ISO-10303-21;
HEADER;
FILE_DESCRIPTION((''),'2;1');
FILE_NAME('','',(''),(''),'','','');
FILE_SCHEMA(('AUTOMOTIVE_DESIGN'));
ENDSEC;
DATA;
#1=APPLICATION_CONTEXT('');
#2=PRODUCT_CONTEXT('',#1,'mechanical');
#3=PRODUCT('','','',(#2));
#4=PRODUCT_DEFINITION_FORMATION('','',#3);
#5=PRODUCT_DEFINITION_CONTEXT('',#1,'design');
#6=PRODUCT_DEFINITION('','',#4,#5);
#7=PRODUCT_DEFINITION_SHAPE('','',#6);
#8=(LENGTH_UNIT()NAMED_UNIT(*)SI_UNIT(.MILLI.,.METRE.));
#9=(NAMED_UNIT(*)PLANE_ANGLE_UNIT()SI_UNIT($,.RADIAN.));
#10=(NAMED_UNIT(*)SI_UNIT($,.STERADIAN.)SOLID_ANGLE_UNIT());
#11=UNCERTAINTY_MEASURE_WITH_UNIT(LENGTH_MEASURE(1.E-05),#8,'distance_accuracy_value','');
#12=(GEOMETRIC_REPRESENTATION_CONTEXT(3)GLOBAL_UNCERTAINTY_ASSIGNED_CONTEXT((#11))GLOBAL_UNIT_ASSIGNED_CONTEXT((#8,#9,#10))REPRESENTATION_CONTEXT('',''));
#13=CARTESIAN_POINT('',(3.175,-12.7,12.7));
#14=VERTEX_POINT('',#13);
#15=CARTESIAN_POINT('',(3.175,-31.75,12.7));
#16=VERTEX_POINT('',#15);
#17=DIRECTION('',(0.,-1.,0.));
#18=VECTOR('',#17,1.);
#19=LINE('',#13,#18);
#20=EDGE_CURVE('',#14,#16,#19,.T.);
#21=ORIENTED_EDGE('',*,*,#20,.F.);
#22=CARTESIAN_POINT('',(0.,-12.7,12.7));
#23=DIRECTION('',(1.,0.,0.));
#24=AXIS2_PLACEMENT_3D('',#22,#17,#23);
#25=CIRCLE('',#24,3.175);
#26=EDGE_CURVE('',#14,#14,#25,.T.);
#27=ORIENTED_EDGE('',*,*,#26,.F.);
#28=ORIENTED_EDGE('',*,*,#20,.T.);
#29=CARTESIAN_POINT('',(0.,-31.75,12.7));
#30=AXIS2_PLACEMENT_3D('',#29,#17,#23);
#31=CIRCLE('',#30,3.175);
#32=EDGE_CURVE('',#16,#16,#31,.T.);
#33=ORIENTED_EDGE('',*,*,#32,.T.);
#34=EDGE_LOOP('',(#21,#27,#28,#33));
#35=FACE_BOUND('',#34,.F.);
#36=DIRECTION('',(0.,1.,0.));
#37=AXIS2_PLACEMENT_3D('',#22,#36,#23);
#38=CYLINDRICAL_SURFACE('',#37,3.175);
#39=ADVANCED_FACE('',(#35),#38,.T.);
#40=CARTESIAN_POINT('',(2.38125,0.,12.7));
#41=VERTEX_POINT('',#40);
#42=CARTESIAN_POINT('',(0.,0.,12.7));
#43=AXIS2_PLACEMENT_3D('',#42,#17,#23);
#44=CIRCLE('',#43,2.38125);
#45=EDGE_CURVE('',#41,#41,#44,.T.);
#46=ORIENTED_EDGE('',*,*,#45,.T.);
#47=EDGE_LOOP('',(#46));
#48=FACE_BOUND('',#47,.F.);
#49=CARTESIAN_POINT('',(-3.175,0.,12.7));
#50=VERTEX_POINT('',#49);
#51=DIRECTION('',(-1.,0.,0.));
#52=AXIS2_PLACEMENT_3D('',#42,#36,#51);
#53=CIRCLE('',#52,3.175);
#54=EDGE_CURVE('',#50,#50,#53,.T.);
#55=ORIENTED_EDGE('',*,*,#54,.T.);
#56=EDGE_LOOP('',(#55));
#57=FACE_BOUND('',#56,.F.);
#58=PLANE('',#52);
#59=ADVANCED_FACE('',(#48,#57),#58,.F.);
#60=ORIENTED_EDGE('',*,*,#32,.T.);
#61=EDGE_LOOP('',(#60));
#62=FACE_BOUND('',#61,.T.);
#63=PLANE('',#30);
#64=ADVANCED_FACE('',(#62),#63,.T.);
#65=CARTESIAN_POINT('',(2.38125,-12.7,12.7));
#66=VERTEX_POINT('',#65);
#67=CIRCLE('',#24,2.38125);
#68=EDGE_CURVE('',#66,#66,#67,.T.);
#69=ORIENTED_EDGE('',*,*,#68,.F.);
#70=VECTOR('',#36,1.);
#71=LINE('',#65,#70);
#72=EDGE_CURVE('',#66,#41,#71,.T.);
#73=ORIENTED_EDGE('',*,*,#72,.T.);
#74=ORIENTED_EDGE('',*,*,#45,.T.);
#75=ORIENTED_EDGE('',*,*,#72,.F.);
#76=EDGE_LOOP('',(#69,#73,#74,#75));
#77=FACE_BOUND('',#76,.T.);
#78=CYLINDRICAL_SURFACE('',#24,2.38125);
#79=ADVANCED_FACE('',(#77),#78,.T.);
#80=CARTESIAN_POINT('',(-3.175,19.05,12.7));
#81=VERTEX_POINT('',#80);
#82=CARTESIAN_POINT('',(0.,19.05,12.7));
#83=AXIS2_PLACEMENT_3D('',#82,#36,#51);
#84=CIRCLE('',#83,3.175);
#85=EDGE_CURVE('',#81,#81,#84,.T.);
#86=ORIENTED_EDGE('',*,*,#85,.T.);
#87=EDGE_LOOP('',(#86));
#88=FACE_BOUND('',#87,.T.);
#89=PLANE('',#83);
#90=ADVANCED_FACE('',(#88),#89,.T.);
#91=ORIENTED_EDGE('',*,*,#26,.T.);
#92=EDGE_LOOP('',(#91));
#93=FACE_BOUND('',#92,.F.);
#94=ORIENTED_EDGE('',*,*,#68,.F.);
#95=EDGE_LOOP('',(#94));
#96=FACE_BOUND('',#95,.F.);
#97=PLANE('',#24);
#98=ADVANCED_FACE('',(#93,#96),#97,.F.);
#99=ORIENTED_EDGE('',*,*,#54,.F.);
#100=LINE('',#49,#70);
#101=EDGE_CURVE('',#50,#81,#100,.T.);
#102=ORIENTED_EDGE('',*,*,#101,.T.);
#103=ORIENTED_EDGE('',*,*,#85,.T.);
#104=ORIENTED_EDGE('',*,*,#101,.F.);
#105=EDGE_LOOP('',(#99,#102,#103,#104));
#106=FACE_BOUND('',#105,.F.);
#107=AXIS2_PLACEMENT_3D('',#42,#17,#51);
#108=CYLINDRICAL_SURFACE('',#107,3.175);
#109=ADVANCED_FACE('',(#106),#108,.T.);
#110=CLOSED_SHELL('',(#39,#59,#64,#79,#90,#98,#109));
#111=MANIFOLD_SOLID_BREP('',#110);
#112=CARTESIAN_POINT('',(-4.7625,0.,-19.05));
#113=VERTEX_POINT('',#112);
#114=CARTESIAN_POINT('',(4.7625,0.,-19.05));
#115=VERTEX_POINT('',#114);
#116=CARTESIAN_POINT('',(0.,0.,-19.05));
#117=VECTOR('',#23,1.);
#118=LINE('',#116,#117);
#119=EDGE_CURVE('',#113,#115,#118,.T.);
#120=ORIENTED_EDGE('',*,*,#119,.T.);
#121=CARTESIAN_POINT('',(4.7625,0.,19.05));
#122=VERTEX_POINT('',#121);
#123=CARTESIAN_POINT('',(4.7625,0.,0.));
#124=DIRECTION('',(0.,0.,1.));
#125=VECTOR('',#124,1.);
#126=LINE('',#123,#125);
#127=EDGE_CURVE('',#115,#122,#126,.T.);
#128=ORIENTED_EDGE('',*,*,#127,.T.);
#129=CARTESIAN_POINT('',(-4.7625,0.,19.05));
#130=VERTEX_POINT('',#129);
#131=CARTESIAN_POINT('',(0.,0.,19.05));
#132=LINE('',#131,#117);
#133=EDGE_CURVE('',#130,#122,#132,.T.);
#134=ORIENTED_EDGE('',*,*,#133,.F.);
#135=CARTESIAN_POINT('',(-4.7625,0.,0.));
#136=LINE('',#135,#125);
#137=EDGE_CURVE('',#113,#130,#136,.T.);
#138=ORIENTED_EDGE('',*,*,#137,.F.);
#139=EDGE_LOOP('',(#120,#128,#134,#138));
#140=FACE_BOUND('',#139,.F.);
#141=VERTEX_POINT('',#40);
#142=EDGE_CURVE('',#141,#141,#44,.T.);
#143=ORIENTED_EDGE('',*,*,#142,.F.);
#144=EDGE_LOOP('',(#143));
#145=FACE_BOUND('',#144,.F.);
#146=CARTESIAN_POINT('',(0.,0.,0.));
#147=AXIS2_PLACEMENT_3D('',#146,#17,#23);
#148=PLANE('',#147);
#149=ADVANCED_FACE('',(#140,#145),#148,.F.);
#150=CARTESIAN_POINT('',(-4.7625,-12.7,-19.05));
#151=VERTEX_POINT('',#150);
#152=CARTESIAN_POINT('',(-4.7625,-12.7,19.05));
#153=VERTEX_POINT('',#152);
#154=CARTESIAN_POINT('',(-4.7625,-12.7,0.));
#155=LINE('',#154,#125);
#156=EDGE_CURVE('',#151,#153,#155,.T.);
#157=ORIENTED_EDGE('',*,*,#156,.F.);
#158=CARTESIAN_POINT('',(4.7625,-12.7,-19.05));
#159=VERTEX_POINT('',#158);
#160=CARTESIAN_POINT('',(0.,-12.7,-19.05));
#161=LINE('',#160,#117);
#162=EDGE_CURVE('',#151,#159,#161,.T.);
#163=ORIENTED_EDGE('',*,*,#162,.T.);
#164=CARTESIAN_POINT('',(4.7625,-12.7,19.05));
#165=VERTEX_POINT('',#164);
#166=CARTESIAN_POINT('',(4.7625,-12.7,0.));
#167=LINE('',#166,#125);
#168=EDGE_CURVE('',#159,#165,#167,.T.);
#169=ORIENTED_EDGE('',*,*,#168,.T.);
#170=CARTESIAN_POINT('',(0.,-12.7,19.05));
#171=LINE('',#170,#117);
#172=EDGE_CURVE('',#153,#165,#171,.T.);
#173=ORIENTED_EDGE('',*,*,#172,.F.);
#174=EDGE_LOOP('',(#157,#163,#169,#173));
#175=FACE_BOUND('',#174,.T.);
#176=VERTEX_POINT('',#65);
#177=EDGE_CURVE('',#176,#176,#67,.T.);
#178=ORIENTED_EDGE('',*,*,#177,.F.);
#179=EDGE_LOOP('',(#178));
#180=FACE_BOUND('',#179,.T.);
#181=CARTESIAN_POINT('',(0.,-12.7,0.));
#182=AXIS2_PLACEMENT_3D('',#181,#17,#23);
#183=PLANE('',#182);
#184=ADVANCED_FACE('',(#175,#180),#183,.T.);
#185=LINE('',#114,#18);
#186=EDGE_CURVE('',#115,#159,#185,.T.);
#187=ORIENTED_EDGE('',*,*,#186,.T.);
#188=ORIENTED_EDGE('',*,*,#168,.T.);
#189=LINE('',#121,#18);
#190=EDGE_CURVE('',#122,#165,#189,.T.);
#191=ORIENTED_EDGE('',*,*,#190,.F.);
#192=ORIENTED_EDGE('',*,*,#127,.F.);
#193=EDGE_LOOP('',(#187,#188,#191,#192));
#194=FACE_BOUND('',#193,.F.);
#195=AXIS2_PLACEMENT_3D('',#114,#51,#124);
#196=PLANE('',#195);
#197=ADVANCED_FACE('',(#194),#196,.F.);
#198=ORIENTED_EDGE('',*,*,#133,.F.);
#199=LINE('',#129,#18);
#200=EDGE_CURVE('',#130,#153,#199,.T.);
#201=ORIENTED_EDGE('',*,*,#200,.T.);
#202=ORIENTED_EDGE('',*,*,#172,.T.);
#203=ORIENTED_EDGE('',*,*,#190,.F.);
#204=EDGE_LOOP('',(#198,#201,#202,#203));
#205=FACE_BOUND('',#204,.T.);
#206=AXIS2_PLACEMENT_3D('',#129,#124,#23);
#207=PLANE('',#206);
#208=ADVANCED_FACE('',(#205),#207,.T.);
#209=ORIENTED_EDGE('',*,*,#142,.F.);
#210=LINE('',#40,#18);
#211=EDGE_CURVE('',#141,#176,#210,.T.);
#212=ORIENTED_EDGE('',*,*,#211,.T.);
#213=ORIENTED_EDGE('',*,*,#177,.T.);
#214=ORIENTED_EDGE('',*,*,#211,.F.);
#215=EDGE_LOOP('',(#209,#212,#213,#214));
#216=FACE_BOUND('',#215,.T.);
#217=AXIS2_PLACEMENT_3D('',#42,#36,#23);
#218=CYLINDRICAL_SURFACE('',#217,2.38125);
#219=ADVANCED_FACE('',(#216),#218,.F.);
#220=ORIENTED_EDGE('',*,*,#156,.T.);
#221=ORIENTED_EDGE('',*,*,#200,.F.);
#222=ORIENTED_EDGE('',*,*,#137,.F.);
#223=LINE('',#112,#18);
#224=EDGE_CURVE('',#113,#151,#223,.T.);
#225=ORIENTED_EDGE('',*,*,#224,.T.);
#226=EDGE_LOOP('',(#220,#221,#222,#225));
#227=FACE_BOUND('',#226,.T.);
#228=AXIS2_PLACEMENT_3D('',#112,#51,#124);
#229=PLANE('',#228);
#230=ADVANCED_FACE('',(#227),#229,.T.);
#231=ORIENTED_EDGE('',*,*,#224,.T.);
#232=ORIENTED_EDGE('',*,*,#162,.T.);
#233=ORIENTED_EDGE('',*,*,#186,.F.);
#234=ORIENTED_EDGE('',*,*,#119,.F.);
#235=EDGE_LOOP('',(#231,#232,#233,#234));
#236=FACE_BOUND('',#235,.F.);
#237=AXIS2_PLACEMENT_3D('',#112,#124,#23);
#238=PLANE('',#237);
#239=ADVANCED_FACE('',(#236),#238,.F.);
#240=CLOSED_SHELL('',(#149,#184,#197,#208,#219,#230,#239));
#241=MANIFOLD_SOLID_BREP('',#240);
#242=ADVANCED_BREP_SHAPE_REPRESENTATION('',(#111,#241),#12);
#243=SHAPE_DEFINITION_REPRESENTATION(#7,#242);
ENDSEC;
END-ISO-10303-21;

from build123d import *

# Parameters (mm, degrees)
F0_W     = 9.525
F0_H     = 38.1
F0_R     = 2.38125
F1_DEPTH = 12.7
F2_R     = 2.38125
F3_DEPTH = 12.7
F2_R_2   = 3.175
F4_DEPTH = 19.05
F5_R     = 3.175
F5_R_2   = 2.38125
F6_DEPTH = 19.05


with BuildPart() as f1:
    # F0 (on Front) → F1 (new body)
    with BuildSketch(Plane.XZ):
        Rectangle(F0_W, F0_H)
        with Locations((0, 12.7)):
            Circle(F0_R, mode=Mode.SUBTRACT)
    extrude(amount=F1_DEPTH)


with BuildPart() as f3:
    # F2 (on face) → F3 (new body)
    with BuildSketch(Plane.XZ.offset(12.7)):
        with Locations((0, 12.7)):
            Circle(F2_R)
    extrude(amount=-F3_DEPTH)

    # F2 (on face) → F4 (join)
    with BuildSketch(Plane.XZ.offset(12.7)):
        with Locations((0, 12.7)):
            Circle(F2_R_2)
        with Locations((0, 12.7)):
            Circle(F2_R, mode=Mode.SUBTRACT)
        with Locations((0, 12.7)):
            Circle(F2_R)
    extrude(amount=F4_DEPTH)

    # F5 (on face) → F6 (join)
    with BuildSketch(Plane(origin=(0, 0, 0), x_dir=(-1, 0, 0), z_dir=(0, 1, 0))):
        with Locations((0, 12.7)):
            Circle(F5_R)
        with Locations((0, 12.7)):
            Circle(F5_R_2, mode=Mode.SUBTRACT)
        with Locations((0, 12.7)):
            Circle(F5_R_2)
    extrude(amount=F6_DEPTH)


solid = Compound([f1.part, f3.part])
